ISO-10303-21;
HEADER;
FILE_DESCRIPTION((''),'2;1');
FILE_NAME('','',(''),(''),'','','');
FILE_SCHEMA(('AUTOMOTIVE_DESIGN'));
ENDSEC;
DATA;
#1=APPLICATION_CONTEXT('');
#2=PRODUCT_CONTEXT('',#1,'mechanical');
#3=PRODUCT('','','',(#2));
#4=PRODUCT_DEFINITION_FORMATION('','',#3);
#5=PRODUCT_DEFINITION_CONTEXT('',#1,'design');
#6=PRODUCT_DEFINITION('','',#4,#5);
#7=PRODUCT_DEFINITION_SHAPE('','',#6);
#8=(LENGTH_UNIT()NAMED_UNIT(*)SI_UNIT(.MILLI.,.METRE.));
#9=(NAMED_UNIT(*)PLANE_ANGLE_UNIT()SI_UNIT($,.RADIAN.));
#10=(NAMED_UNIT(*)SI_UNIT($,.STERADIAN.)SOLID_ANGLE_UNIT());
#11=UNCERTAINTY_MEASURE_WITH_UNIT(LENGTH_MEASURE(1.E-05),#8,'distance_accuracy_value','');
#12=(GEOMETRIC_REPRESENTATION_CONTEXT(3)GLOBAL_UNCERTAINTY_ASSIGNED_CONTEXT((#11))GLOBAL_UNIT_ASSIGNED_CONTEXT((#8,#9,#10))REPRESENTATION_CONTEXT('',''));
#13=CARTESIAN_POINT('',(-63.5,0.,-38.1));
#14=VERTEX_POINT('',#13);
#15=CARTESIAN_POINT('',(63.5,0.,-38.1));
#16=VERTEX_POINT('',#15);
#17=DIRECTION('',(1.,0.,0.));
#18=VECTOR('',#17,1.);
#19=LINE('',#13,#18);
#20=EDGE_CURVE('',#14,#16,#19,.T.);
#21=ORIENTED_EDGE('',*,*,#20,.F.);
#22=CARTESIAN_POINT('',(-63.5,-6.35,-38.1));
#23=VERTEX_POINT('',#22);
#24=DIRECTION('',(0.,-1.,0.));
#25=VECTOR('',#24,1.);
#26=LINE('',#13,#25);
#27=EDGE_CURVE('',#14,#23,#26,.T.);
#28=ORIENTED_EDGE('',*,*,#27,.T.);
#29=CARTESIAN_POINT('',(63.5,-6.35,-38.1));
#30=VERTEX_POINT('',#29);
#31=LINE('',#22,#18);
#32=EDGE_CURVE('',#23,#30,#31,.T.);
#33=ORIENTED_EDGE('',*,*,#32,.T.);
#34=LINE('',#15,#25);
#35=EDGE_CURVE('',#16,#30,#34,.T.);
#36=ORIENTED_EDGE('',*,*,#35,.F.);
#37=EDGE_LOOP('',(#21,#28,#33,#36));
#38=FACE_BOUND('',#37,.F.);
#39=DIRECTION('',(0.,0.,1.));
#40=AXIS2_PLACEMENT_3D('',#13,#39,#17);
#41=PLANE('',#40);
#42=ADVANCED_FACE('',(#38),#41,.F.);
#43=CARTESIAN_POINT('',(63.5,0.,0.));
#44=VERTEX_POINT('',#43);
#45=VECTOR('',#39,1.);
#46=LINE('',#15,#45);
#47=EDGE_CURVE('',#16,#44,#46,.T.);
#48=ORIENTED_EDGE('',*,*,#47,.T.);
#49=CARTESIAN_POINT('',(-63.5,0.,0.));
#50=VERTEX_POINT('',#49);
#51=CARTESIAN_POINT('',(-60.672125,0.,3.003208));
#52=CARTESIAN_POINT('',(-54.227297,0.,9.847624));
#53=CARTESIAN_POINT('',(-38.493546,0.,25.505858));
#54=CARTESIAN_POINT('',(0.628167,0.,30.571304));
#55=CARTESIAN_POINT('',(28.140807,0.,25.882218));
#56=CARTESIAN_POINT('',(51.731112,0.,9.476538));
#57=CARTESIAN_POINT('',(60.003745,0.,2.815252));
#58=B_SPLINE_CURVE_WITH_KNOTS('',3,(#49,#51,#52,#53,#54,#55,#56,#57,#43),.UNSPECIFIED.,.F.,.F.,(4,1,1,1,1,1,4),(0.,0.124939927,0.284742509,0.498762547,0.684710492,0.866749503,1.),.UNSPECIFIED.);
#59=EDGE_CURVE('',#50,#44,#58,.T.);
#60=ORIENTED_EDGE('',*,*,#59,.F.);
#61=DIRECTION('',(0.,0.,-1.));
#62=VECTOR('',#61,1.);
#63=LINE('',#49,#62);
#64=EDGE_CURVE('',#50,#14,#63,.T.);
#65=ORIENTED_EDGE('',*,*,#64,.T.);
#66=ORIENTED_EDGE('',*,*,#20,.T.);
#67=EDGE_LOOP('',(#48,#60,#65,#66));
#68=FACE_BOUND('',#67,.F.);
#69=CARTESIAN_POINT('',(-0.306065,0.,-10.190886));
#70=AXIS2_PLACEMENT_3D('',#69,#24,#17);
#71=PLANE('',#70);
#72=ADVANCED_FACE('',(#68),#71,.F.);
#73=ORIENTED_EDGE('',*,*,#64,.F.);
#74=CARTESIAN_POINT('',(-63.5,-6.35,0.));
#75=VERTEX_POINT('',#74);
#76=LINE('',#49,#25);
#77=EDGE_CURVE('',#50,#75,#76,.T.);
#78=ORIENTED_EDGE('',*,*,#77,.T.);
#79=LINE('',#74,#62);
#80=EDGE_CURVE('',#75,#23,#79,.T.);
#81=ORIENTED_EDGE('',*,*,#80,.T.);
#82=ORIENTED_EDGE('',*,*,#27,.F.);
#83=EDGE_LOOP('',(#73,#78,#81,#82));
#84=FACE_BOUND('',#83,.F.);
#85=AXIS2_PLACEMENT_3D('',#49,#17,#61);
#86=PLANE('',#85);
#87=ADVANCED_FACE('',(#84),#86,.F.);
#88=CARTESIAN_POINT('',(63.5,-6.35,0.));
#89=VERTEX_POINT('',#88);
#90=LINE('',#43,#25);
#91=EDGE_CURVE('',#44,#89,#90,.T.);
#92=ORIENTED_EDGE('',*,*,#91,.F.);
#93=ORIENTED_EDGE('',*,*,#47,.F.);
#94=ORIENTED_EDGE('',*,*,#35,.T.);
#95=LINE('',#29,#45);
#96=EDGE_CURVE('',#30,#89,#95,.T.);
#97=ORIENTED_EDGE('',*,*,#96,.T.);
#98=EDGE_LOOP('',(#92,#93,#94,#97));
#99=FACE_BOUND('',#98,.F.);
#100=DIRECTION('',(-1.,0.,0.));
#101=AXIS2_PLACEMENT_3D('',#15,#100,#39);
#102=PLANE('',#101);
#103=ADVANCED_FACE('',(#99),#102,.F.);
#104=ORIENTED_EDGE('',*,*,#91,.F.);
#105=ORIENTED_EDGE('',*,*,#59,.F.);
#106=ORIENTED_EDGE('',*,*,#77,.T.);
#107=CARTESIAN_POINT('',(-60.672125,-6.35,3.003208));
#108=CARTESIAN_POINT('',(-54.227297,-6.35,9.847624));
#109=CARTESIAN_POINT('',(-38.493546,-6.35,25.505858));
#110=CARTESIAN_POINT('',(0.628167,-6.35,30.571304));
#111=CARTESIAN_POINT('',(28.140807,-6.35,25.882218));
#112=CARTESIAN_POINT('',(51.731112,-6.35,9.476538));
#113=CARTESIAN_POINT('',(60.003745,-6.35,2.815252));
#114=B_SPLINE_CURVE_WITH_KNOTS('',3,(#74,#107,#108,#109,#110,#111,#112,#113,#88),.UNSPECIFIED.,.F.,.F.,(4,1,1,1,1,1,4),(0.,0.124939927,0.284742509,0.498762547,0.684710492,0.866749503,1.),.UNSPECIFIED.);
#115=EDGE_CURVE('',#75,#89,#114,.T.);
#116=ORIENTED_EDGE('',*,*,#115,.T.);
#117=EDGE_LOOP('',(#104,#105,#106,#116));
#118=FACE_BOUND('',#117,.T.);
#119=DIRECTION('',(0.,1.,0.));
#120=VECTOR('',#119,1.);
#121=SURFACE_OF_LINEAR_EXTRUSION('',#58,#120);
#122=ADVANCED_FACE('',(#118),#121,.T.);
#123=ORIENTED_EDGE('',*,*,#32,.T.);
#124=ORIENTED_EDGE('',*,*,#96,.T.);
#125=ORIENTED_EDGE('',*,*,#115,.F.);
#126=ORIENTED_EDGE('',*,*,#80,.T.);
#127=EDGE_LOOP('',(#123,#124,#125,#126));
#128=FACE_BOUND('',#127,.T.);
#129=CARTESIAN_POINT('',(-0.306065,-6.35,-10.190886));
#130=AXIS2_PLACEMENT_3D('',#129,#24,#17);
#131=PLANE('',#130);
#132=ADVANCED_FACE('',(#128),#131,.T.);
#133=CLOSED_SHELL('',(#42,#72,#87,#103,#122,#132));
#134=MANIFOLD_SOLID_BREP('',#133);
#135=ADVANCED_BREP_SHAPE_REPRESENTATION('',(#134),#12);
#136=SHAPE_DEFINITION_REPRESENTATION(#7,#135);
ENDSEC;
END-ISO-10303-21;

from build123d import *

# Parameters (mm, degrees)
F1_DEPTH = 6.35


with BuildPart() as f1:
    # F0 (on Front) → F1 (new body)
    with BuildSketch(Plane.XZ):
        with BuildLine():
            Line((-63.5, -38.1), (63.5, -38.1))
            Line((63.5, -38.1), (63.5, 0))
            add(Edge.make_bspline(
                [(-63.5, 0), (-60.67212487, 3.0032077004), (-54.227297491, 9.8476242046), (-38.4935463186, 25.5058577681), (0.6281666855, 30.5713039167), (28.1408073024, 25.8822175031), (51.7311119878, 9.4765375074), (60.0037451352, 2.8152524119), (63.5, 0)],
                knots=[0, 0, 0, 0, 0.1249399267, 0.2847425092, 0.498762547, 0.6847104917, 0.8667495031, 1, 1, 1, 1], degree=3))
            Line((-63.5, 0), (-63.5, -38.1))
        make_face()
    extrude(amount=F1_DEPTH)


solid = f1.part
